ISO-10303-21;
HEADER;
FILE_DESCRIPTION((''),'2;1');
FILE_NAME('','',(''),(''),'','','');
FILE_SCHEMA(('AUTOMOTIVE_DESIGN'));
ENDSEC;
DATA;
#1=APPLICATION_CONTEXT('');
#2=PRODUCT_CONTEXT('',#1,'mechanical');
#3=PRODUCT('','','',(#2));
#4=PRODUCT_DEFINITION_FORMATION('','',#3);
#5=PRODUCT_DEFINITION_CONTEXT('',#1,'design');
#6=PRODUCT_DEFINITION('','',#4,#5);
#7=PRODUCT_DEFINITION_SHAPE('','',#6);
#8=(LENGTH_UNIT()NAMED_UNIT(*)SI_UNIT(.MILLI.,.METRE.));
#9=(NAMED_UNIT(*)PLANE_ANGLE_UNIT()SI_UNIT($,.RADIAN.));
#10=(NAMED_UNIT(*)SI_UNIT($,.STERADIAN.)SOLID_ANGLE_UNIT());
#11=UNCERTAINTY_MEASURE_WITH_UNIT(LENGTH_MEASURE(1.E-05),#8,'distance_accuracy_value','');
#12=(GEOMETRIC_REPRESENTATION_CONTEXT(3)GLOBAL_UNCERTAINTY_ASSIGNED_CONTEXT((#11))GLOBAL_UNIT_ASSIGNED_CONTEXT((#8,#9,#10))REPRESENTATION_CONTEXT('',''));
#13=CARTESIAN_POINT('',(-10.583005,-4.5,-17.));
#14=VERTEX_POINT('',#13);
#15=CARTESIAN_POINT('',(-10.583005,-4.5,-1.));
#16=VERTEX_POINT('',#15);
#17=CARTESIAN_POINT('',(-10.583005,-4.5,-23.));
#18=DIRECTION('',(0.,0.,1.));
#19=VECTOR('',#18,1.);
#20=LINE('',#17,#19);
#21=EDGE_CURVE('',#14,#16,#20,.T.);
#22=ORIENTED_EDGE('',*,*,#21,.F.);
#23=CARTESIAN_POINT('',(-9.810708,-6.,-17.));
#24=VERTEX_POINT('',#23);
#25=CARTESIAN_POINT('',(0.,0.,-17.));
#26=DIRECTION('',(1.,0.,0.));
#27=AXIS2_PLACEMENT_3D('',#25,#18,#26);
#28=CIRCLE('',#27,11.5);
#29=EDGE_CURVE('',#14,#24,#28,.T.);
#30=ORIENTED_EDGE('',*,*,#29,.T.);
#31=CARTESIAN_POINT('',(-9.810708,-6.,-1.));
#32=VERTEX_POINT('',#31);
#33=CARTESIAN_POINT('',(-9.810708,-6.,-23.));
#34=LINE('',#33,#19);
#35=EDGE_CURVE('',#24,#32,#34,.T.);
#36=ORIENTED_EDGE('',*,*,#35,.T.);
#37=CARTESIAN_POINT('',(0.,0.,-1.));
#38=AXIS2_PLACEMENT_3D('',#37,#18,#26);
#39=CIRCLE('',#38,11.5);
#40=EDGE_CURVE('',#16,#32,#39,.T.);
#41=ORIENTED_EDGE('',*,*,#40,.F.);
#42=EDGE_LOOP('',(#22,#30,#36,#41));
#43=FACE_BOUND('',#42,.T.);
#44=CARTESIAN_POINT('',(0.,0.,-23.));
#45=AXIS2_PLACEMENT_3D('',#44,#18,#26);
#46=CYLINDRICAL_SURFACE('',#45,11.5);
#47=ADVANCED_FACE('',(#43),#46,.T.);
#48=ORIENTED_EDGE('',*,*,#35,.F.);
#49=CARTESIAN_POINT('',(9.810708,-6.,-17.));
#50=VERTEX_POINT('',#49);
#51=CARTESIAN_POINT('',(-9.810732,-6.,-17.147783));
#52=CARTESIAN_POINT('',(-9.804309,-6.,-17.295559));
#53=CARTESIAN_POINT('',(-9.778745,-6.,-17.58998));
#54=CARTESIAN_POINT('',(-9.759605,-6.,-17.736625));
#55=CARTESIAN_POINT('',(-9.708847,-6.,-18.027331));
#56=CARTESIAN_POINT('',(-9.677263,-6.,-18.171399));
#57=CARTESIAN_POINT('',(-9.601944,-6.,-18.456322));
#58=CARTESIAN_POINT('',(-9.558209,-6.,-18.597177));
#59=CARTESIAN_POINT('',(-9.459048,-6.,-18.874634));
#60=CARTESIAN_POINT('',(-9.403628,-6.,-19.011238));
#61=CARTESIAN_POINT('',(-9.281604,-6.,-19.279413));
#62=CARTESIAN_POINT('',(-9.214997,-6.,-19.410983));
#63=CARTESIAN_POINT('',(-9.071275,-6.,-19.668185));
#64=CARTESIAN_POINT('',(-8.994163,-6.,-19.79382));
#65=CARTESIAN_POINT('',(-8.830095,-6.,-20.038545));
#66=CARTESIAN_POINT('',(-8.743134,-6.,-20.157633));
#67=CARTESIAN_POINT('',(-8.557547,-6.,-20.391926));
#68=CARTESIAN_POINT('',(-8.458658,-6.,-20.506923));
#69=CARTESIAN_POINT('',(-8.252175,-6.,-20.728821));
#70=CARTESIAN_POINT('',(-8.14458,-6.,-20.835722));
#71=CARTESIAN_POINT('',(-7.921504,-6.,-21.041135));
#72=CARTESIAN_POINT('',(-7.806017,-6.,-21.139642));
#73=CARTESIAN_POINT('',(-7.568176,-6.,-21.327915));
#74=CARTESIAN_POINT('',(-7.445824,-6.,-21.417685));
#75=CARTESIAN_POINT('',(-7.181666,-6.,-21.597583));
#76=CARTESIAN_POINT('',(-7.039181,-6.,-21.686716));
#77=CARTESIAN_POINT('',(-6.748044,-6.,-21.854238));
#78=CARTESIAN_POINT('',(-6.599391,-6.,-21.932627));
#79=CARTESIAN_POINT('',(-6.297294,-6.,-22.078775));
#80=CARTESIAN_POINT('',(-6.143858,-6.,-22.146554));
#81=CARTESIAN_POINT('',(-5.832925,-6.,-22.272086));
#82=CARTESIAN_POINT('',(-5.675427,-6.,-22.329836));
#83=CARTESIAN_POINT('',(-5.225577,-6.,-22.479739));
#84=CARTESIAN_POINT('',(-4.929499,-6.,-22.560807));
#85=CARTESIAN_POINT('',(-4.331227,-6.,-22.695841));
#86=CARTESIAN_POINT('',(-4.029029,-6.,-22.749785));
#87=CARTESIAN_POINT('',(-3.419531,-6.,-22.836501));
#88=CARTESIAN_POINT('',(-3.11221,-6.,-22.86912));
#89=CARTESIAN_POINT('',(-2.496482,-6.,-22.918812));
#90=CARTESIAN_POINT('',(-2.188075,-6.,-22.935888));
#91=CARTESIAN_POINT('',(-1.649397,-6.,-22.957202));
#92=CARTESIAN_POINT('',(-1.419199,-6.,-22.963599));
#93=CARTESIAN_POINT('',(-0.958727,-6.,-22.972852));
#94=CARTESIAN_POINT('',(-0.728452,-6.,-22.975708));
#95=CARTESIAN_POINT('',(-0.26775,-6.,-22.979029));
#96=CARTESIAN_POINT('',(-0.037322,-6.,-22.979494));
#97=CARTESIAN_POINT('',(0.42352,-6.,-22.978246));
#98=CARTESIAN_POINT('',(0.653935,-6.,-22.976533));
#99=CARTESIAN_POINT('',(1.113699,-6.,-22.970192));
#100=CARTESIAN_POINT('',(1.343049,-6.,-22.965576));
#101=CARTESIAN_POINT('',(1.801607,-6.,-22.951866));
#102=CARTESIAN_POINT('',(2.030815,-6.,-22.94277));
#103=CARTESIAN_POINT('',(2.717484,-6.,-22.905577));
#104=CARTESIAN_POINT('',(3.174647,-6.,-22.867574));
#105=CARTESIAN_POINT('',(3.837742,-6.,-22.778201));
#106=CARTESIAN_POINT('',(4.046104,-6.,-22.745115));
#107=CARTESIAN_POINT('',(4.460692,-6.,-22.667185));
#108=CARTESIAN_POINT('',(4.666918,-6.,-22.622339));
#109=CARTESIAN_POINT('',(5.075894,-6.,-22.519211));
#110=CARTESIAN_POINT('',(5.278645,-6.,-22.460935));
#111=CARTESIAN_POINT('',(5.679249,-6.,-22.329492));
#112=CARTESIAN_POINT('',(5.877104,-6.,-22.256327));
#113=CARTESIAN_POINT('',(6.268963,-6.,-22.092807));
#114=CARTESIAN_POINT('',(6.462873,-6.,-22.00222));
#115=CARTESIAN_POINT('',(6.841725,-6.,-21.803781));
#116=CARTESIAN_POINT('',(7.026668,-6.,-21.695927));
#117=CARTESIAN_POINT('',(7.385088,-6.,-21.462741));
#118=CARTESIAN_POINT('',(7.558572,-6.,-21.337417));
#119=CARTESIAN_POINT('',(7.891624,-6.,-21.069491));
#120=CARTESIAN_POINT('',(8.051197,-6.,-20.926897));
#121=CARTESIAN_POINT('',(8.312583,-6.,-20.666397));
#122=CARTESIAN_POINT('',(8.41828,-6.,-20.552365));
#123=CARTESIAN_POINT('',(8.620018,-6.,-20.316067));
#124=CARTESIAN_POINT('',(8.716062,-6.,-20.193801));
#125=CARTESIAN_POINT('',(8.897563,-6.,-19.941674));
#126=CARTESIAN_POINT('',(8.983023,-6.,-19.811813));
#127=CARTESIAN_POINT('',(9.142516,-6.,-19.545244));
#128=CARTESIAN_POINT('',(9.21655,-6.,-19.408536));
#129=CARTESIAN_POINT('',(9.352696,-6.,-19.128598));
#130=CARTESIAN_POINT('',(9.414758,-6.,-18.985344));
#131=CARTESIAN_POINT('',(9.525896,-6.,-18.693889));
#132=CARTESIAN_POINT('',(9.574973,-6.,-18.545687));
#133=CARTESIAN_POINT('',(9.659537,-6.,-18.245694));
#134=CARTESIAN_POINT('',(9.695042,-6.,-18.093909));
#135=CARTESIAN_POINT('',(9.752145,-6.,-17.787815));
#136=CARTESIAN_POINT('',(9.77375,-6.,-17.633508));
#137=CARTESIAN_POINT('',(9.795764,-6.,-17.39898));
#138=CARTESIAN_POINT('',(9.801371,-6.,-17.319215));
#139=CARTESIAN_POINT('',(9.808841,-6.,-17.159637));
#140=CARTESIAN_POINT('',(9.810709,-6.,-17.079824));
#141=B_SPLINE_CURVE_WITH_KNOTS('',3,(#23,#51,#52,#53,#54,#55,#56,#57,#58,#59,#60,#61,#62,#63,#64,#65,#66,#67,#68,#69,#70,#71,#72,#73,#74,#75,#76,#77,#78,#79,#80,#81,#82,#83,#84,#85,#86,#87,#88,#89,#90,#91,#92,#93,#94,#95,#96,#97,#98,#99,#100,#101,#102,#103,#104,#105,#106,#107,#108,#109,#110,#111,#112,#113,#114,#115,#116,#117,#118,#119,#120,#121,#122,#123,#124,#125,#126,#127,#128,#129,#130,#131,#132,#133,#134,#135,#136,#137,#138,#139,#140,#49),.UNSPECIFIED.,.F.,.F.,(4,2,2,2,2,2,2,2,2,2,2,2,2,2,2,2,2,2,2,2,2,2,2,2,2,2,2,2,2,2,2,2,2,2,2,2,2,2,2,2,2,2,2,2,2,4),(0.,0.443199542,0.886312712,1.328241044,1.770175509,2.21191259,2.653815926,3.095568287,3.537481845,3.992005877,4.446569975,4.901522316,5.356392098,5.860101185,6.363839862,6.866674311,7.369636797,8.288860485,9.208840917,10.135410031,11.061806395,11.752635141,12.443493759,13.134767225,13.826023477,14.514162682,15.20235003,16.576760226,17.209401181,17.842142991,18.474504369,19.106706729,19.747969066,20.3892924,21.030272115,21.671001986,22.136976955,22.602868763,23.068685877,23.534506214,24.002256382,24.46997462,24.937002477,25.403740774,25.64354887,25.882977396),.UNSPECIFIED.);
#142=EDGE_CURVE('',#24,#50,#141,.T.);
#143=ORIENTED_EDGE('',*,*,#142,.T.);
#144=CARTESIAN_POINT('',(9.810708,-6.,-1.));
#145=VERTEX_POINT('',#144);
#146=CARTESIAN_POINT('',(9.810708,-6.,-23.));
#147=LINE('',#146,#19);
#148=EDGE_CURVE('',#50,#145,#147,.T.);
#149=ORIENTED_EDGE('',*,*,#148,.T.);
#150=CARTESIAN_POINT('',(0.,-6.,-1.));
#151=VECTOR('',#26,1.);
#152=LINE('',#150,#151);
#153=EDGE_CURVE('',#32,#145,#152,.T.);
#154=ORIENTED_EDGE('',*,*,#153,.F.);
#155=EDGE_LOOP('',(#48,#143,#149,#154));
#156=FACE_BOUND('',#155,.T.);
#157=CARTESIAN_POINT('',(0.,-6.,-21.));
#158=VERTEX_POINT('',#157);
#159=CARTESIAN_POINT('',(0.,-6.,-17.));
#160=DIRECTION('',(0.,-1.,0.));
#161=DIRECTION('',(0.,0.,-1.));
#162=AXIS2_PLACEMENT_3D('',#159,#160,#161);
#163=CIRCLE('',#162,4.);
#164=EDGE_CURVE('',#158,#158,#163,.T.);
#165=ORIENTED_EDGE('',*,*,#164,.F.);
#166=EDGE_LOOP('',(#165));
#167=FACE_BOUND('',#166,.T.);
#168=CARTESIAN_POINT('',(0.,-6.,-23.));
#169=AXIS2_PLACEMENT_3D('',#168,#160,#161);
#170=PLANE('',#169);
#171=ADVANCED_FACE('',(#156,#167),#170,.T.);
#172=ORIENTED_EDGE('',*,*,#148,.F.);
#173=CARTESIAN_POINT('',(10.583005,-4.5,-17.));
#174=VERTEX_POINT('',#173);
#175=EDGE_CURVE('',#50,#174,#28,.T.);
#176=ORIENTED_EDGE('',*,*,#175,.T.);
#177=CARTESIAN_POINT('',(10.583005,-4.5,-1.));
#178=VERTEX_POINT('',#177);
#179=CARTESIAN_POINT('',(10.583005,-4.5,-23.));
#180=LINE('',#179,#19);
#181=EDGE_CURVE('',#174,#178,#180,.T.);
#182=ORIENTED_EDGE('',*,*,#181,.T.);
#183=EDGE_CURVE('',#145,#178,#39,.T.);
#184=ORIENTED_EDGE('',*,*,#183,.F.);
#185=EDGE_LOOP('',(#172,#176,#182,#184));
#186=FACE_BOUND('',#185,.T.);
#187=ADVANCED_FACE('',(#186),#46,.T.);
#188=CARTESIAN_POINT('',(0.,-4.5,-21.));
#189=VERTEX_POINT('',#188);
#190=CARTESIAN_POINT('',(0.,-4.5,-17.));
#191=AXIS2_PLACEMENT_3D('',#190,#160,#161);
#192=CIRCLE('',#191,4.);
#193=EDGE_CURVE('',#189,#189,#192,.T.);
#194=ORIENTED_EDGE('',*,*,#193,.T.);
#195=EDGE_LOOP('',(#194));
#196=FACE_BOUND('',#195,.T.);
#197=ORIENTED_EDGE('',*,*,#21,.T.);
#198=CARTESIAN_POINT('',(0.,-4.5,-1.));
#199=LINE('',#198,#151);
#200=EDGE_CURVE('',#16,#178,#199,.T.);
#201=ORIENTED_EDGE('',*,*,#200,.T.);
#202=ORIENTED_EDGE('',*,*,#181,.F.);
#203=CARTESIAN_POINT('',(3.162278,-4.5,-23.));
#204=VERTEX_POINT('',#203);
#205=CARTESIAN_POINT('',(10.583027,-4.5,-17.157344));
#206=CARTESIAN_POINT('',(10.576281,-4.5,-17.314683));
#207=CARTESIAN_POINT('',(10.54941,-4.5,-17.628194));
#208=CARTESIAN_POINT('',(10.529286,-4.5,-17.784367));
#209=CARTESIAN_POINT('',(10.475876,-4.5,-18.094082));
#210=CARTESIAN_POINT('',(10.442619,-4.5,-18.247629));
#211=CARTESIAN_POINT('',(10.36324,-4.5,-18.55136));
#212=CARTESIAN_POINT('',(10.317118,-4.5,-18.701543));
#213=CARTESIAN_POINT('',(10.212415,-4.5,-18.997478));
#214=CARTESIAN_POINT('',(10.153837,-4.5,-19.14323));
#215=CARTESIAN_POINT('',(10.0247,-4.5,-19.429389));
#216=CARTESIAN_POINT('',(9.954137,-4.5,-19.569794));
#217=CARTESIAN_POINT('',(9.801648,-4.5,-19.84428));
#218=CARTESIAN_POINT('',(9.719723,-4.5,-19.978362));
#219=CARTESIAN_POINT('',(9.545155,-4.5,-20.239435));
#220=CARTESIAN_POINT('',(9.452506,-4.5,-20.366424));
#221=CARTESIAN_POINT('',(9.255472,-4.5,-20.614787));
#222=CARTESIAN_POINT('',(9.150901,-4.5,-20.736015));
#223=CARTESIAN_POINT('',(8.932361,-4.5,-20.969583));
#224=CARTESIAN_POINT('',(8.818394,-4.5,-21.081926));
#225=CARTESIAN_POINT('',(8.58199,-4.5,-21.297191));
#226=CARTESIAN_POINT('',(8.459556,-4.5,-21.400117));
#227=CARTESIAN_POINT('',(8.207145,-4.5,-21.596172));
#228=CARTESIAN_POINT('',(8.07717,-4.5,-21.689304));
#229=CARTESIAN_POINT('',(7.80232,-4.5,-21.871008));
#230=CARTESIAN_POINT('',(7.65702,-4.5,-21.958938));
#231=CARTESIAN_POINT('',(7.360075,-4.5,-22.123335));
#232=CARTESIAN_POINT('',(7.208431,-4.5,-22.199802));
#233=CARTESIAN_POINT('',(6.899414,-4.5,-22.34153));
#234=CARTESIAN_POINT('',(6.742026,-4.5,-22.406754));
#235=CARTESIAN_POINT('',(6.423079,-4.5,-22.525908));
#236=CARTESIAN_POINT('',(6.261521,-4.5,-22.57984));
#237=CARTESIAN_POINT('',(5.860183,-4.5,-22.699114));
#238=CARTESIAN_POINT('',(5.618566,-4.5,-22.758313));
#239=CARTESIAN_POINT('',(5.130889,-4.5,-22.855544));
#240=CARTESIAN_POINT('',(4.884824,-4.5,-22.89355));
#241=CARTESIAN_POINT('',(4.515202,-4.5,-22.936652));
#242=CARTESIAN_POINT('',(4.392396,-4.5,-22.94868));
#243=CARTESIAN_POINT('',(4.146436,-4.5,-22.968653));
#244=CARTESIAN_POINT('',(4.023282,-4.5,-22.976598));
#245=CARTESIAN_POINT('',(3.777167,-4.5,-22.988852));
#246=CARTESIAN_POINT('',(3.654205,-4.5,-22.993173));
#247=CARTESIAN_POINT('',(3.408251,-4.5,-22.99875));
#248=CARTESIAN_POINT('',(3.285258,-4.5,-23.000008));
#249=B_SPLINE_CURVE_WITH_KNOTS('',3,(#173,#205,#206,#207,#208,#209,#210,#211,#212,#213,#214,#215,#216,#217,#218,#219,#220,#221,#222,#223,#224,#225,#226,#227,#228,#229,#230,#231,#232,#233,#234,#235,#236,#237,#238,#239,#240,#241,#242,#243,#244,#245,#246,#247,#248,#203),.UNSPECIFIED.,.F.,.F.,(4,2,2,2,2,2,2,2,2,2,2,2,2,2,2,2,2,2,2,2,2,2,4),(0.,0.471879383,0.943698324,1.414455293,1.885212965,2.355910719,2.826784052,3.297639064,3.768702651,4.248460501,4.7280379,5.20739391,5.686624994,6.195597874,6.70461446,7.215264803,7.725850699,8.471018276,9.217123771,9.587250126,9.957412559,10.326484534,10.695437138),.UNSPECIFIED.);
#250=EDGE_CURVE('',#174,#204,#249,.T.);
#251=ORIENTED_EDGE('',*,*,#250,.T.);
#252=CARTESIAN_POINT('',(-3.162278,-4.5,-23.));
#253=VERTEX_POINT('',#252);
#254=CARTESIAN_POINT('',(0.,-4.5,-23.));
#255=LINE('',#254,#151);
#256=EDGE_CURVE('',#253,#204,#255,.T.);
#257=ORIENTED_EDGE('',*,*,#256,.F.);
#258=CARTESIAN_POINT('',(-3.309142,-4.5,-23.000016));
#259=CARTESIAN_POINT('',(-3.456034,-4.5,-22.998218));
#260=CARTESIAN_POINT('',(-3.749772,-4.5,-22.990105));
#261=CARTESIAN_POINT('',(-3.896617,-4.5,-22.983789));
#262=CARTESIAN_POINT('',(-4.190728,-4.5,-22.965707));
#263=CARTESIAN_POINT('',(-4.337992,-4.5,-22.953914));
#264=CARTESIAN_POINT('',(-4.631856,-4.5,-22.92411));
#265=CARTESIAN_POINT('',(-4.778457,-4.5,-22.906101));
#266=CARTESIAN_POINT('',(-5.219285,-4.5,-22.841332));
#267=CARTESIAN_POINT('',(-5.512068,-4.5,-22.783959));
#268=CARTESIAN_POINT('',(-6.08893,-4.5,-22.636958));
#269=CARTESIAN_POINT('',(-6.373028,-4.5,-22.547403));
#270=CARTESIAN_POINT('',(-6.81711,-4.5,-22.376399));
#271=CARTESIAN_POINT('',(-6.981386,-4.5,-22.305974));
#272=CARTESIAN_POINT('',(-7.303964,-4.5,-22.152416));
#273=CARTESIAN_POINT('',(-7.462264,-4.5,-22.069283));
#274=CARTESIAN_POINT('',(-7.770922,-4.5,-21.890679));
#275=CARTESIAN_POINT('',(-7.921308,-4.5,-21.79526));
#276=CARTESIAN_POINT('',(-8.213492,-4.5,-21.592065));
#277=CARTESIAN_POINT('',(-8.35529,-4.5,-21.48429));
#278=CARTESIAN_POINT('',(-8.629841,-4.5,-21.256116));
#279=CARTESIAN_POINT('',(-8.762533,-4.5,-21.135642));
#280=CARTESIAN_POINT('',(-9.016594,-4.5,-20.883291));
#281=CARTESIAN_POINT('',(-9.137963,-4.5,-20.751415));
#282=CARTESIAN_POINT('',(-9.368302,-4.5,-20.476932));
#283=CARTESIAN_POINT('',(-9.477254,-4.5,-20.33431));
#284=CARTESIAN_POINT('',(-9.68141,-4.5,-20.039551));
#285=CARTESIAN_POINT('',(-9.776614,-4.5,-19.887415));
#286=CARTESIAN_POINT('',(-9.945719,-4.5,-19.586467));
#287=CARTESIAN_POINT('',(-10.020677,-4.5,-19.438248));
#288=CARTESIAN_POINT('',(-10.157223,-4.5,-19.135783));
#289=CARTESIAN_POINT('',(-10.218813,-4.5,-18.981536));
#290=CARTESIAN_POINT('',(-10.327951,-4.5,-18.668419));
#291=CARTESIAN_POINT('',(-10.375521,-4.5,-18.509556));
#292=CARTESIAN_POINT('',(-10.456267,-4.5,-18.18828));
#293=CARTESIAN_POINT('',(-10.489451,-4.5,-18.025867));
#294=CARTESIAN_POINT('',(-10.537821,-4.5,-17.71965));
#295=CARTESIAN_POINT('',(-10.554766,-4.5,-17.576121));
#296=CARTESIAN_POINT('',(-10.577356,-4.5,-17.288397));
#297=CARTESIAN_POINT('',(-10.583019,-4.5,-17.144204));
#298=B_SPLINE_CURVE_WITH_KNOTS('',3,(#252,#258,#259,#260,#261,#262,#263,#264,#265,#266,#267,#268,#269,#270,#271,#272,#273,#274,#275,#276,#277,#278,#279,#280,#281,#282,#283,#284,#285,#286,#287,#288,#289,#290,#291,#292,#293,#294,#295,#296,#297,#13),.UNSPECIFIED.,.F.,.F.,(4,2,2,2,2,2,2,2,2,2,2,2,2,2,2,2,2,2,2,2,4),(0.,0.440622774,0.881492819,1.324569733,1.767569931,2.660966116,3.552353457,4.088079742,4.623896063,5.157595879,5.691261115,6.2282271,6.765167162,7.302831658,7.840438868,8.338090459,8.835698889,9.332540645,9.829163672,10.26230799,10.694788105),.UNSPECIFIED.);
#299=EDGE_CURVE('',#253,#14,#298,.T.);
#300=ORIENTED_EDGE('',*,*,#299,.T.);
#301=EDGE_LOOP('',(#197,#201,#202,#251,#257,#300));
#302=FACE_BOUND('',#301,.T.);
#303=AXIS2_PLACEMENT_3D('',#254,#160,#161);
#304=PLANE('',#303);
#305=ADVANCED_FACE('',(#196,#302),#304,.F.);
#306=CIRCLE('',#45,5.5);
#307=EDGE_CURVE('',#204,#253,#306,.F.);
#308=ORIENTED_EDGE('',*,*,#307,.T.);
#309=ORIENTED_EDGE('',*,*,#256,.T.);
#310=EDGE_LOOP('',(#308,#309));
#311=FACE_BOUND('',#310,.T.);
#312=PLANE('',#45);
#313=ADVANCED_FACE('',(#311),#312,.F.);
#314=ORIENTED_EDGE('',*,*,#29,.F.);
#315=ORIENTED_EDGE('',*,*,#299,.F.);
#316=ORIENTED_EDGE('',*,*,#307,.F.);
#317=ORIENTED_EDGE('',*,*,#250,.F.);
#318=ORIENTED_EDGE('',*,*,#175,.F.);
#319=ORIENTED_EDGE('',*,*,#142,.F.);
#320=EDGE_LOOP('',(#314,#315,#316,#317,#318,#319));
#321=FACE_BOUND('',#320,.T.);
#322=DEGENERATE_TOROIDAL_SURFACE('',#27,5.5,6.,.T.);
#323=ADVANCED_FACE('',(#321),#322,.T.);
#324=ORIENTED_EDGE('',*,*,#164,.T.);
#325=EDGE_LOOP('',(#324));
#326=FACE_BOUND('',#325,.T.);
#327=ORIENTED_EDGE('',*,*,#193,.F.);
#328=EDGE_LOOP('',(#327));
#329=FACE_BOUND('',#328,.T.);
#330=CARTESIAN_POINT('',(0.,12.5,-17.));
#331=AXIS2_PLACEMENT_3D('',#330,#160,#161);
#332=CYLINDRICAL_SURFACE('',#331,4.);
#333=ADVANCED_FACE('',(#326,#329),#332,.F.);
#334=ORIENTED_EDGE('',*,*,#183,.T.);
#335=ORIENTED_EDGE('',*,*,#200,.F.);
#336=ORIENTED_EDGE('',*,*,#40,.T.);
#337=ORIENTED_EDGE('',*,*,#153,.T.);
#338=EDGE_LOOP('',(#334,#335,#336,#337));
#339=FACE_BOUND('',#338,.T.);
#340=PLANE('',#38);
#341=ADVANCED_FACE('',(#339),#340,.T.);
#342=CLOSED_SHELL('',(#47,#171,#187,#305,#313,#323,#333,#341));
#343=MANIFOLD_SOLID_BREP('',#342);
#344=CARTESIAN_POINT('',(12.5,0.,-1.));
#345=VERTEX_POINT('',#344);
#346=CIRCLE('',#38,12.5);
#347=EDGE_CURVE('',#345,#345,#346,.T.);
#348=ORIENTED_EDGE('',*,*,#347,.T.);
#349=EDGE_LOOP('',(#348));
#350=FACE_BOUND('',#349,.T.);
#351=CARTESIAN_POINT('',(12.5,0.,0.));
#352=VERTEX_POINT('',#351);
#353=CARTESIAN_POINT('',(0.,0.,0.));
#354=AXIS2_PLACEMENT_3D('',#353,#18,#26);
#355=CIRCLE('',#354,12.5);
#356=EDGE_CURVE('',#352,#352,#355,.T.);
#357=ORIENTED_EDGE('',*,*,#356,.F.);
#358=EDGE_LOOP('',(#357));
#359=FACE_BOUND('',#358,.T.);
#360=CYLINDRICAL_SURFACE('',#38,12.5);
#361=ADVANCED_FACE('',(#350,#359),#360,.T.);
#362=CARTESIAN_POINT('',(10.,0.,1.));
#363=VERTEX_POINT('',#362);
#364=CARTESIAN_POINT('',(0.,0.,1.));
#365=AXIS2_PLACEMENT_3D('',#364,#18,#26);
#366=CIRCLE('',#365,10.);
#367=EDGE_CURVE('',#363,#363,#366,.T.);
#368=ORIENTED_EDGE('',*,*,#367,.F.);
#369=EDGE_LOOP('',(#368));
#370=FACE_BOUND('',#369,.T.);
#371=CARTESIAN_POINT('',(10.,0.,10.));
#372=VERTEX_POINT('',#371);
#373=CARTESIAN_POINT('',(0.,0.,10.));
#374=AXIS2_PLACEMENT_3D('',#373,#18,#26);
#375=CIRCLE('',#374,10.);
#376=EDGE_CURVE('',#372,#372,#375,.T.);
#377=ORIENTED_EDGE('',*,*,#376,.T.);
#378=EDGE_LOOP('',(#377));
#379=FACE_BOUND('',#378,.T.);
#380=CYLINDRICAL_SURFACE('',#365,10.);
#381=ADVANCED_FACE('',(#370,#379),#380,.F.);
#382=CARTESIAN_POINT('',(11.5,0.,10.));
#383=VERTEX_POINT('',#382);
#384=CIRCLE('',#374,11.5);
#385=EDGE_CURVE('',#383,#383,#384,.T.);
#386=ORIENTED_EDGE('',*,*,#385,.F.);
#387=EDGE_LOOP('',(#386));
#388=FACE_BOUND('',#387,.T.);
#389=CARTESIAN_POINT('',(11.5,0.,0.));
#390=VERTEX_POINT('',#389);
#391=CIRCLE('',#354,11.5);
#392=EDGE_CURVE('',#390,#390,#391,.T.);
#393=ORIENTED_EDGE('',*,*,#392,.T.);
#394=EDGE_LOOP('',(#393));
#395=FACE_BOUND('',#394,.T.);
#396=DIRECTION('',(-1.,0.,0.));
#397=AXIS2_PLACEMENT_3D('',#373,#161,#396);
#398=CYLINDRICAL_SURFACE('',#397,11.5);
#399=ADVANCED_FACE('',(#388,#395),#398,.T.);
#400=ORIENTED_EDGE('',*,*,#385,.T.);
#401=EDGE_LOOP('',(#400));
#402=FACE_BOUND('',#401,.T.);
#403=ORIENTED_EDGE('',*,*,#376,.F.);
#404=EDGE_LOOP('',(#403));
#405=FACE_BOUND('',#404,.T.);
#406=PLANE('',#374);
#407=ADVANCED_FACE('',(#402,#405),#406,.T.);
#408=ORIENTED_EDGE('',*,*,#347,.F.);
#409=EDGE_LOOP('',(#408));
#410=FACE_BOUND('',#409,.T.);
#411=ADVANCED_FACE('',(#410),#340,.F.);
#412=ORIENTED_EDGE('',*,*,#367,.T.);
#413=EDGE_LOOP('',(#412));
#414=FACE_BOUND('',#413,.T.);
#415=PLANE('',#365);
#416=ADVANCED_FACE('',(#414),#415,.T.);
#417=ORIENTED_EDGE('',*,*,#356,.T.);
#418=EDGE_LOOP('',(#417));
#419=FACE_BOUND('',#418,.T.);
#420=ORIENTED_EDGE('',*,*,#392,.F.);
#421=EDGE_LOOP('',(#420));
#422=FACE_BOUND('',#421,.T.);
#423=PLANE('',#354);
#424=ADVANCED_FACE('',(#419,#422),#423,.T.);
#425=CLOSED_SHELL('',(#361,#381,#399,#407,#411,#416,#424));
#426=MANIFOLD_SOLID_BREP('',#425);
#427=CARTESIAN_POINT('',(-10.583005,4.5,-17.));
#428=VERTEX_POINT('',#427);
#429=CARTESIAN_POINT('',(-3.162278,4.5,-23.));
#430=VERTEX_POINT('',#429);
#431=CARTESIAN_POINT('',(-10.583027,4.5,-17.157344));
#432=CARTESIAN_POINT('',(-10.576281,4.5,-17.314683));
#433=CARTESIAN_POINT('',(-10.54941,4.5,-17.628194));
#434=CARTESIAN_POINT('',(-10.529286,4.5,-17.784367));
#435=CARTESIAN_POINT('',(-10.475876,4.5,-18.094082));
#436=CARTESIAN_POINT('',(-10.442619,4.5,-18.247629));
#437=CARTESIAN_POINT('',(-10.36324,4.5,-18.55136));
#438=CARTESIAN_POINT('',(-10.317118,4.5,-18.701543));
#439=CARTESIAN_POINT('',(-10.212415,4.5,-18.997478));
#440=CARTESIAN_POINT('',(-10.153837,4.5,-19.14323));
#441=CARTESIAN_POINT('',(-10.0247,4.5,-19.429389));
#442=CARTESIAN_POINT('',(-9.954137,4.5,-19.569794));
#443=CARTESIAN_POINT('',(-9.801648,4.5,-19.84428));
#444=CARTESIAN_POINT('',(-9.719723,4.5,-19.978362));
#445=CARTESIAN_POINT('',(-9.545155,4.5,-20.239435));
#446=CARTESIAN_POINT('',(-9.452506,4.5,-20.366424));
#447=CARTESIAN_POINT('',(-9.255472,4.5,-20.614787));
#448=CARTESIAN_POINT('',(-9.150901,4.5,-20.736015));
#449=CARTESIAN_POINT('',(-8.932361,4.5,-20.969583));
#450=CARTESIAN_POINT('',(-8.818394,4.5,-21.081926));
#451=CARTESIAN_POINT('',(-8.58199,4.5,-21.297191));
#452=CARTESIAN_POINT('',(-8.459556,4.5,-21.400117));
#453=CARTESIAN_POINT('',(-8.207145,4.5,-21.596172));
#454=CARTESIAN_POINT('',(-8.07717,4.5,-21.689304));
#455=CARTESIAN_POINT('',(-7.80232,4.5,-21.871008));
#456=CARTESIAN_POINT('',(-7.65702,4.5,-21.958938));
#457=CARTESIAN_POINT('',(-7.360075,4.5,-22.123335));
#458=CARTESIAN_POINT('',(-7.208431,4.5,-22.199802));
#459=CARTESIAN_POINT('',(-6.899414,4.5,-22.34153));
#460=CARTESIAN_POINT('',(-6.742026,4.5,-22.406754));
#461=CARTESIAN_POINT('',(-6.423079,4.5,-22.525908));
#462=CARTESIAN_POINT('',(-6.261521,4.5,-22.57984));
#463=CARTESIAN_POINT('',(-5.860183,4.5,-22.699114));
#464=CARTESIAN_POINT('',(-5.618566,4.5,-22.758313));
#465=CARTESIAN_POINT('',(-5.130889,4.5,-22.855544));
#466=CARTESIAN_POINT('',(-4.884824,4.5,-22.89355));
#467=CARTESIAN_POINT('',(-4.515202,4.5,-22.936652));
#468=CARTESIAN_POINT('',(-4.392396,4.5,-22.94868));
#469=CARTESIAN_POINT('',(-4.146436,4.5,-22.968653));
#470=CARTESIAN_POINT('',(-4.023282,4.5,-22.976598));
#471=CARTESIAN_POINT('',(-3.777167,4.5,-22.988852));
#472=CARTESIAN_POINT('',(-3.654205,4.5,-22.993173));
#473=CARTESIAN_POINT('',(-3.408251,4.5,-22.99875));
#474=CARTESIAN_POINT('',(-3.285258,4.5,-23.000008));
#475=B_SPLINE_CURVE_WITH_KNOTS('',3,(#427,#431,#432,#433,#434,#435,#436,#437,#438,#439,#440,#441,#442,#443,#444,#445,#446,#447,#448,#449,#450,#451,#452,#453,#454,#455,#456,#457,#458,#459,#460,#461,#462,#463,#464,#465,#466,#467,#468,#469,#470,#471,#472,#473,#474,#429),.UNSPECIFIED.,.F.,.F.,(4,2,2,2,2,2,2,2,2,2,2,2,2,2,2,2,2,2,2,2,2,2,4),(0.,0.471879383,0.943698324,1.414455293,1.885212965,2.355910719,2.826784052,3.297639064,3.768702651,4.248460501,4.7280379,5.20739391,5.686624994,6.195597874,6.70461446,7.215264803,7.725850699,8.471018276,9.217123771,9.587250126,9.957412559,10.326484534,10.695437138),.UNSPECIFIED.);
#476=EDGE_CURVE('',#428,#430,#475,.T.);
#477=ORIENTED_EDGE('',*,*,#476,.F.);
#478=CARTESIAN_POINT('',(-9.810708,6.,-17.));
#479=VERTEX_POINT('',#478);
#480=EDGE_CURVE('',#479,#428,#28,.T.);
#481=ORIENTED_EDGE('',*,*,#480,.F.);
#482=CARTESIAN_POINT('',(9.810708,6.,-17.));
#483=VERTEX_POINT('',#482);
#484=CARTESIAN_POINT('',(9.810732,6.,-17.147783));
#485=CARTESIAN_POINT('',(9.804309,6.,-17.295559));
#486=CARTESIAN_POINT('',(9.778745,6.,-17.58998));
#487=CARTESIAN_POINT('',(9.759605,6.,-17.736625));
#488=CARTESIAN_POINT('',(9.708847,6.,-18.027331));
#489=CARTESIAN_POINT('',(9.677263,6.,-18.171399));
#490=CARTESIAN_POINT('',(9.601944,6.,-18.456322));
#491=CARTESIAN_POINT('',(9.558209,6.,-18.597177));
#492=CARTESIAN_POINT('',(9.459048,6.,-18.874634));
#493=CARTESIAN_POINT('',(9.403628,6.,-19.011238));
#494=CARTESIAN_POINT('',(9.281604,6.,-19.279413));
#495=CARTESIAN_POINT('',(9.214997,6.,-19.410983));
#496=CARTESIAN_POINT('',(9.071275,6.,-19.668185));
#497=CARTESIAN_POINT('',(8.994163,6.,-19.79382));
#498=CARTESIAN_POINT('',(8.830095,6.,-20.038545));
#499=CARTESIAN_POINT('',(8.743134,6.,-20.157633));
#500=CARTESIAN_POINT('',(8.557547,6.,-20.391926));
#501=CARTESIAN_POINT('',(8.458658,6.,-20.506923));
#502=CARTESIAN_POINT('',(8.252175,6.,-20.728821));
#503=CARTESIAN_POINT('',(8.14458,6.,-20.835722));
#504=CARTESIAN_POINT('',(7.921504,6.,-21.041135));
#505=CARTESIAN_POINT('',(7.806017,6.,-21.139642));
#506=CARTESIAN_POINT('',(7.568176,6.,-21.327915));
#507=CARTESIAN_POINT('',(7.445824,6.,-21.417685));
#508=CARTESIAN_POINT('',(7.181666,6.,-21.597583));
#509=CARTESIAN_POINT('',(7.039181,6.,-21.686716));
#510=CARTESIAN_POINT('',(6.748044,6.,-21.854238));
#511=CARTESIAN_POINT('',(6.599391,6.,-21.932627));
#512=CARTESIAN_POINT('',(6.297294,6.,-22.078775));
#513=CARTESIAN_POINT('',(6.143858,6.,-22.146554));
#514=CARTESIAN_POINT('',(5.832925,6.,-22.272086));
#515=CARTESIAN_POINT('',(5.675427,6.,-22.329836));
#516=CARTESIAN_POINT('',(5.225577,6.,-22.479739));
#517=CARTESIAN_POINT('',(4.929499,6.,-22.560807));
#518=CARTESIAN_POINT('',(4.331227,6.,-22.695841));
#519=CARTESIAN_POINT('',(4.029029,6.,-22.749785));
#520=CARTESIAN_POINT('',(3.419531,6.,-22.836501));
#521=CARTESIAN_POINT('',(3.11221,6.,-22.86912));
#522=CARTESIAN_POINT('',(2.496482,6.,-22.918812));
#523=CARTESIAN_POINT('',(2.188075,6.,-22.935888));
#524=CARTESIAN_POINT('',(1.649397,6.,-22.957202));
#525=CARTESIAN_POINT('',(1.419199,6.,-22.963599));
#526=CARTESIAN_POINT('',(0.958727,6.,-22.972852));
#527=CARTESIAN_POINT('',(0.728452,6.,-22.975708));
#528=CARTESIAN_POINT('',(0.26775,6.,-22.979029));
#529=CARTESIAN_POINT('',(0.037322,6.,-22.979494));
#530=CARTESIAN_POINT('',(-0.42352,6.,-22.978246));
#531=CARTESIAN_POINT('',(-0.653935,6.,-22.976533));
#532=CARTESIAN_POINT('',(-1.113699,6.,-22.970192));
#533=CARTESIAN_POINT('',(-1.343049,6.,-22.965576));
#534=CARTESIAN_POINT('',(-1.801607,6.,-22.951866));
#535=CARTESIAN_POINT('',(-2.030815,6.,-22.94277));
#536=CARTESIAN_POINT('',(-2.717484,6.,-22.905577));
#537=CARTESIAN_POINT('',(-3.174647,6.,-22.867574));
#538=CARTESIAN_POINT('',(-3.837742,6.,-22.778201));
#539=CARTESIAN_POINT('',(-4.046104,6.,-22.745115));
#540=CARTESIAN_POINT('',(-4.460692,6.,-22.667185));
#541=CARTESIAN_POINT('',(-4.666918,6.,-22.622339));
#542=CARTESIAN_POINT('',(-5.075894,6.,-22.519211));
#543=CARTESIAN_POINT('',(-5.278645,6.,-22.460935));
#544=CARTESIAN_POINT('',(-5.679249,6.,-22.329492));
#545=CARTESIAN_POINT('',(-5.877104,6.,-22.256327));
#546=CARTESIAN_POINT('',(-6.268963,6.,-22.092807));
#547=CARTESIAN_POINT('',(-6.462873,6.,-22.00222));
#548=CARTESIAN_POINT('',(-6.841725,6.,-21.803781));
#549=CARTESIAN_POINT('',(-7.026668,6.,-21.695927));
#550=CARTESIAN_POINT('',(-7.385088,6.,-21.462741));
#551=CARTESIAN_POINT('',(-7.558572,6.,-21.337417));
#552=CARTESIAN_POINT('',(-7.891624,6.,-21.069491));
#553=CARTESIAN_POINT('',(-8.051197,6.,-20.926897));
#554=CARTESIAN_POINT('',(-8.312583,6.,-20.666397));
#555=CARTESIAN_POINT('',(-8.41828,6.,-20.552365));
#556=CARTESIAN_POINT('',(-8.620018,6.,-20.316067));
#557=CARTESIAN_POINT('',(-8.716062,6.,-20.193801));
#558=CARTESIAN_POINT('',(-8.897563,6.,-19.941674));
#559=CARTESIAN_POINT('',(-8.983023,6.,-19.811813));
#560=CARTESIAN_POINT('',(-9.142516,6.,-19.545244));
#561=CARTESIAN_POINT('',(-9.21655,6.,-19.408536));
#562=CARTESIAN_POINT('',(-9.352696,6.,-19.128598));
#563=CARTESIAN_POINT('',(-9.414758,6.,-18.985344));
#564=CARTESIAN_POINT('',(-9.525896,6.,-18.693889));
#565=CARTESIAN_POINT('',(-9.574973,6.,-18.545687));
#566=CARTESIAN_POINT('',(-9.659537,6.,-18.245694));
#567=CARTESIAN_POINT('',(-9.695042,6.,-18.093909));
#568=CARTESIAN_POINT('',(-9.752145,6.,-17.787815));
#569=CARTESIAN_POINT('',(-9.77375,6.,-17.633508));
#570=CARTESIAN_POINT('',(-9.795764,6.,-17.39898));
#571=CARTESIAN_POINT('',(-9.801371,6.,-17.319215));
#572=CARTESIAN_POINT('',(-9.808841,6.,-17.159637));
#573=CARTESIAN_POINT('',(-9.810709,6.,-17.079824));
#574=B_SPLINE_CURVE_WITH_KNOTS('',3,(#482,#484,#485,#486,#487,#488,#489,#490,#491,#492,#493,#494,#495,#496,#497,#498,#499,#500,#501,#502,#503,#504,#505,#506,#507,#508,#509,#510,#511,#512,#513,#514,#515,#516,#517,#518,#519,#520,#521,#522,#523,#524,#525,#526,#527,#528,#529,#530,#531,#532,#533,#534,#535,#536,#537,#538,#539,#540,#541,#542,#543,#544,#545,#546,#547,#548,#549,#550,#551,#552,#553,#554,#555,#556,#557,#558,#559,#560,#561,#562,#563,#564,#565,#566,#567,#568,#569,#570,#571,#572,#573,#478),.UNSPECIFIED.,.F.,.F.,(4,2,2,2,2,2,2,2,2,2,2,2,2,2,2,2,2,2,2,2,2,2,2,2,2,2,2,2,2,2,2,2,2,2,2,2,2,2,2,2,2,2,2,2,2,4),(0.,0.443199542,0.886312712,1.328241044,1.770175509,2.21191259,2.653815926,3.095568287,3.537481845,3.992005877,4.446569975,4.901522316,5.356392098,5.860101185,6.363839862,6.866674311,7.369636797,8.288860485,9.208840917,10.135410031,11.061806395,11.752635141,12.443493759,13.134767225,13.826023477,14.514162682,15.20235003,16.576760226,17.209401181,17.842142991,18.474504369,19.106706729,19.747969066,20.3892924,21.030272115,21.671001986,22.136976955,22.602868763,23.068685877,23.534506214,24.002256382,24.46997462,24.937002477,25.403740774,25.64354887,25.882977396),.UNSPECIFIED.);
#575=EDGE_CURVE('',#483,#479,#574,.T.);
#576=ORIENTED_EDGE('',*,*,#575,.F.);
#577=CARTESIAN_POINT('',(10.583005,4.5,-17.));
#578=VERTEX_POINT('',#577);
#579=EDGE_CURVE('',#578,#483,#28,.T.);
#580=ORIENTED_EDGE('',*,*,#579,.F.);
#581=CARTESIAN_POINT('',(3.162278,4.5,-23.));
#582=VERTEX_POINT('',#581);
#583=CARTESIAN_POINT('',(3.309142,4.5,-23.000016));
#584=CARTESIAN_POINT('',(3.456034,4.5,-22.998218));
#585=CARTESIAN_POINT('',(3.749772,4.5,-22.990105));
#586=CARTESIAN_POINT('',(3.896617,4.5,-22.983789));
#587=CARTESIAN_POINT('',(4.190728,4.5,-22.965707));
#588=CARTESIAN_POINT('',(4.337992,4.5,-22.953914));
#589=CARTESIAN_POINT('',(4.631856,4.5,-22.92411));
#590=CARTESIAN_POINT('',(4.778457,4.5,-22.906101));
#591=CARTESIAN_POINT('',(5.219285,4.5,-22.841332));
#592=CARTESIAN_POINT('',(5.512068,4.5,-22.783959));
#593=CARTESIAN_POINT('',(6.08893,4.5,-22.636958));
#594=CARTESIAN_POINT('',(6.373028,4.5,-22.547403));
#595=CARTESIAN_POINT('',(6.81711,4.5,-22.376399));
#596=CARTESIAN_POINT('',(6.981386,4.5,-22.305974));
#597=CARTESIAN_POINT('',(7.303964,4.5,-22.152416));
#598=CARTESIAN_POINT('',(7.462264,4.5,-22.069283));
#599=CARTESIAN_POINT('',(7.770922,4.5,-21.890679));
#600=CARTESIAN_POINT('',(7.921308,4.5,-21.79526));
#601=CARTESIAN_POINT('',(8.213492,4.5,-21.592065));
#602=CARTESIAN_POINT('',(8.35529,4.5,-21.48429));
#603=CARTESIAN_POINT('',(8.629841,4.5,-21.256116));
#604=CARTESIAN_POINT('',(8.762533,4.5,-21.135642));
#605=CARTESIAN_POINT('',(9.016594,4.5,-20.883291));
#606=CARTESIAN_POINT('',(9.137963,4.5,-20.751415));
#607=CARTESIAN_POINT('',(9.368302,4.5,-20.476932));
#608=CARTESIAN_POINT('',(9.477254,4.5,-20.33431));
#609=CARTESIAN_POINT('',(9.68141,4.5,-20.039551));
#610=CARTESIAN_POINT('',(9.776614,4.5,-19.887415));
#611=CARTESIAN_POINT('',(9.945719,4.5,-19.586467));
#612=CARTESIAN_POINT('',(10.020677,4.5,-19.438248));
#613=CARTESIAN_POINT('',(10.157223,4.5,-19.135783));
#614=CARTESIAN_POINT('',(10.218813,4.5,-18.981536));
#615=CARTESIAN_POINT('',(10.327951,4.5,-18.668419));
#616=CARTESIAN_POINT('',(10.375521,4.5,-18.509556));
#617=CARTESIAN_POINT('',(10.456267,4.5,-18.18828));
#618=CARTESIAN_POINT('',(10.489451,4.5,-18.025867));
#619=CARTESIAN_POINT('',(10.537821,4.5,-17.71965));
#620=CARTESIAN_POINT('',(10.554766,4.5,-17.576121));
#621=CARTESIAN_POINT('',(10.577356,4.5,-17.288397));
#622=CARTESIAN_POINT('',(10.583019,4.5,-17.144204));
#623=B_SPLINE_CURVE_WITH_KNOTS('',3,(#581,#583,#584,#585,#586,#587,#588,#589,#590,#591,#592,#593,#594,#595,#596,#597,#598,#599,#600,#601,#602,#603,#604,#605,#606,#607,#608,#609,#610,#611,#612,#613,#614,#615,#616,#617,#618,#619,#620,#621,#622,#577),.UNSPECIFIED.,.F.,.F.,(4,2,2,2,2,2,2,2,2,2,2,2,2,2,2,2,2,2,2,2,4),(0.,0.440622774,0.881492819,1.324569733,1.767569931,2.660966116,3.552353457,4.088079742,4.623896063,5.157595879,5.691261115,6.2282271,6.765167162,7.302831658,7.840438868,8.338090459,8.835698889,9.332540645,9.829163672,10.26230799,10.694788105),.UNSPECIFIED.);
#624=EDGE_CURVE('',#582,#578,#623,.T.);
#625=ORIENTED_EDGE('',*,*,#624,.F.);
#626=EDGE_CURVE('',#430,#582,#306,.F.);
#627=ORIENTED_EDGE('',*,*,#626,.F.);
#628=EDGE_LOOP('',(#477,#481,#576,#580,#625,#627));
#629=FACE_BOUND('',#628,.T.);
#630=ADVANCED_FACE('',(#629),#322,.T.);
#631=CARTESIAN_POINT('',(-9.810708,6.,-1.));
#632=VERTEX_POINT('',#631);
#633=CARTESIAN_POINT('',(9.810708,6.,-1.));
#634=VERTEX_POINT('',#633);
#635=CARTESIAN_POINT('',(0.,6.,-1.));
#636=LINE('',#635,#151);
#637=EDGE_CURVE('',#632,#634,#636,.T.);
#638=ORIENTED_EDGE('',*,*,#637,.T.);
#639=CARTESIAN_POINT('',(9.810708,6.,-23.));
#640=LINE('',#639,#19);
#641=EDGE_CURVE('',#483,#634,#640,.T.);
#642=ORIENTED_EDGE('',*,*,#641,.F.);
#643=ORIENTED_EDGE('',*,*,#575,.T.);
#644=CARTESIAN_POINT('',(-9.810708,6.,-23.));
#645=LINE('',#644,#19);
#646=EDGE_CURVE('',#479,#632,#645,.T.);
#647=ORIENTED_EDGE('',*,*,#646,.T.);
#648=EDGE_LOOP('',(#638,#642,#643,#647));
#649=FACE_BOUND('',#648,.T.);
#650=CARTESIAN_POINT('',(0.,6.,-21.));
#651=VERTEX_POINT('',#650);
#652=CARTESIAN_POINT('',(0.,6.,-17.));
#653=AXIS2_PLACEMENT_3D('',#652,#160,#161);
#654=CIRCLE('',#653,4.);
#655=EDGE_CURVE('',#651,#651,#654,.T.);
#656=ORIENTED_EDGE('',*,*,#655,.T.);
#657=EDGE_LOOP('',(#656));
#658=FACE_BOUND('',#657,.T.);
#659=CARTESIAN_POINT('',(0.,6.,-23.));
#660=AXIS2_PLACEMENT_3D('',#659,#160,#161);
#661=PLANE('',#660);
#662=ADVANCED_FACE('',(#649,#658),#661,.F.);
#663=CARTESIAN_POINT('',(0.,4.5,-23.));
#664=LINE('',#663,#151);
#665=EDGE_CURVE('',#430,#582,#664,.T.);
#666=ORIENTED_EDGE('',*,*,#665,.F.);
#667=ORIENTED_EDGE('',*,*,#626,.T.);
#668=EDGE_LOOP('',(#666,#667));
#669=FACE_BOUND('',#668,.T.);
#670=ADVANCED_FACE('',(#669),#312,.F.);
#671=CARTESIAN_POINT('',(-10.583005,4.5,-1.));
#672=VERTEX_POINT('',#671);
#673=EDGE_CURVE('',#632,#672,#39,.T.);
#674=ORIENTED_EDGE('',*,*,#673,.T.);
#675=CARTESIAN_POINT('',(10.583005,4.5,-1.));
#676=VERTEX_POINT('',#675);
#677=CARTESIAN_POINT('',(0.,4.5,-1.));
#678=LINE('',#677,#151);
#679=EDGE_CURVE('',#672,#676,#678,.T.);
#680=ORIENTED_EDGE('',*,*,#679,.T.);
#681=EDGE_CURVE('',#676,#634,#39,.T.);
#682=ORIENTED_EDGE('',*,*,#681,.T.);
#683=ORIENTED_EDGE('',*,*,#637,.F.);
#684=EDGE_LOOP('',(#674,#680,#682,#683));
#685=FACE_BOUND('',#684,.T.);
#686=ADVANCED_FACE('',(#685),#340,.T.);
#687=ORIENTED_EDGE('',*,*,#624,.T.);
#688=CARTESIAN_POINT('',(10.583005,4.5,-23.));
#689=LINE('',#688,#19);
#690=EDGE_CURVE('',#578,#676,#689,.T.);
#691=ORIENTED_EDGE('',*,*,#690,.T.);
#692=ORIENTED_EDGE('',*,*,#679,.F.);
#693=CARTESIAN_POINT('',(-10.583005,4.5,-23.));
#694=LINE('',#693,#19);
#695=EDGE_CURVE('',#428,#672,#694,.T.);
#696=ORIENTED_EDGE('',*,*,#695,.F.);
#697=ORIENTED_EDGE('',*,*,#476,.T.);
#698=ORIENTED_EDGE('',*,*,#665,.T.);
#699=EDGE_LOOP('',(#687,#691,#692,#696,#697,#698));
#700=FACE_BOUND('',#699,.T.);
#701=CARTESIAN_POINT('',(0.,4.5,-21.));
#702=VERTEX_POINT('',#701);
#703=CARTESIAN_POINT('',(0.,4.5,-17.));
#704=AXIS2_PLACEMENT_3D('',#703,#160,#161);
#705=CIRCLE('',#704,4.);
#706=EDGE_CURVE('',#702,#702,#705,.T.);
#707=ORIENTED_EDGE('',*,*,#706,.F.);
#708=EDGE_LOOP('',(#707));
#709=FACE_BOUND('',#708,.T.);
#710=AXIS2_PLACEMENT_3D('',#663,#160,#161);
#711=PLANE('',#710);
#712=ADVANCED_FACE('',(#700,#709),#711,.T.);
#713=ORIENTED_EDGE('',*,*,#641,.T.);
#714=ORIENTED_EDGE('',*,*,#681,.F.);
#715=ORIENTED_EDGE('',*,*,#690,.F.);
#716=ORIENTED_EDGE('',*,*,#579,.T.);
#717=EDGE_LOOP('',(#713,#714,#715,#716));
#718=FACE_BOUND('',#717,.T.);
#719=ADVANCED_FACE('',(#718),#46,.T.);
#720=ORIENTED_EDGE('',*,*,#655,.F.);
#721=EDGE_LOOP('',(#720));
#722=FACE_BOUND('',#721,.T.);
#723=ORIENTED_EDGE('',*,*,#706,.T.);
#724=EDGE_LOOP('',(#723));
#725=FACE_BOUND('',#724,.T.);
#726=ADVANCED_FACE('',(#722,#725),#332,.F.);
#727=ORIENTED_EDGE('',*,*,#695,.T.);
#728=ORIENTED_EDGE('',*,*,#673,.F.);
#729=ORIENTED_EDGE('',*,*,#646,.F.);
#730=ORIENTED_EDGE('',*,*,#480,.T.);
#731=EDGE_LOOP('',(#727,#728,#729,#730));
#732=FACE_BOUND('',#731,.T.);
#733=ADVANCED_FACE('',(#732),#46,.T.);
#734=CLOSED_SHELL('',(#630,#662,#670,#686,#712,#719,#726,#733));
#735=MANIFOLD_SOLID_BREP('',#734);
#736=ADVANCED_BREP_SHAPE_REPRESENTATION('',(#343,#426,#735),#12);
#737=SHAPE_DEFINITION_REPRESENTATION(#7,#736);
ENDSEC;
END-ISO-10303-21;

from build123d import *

# Parameters (mm, degrees)
BOSS_EXTRUDE1_DEPTH   = 10
BOSS_EXTRUDE2_START   = -1
SKETCH1_3_R           = 12.5
BOSS_EXTRUDE2_DEPTH   = 1
BOSS_EXTRUDE3_START   = -1
BOSS_EXTRUDE3_DEPTH   = 22
BOSS_EXTRUDE3_2_DEPTH = 22
SKETCH2_R             = 4
CUT_EXTRUDE1_DEPTH    = 33.05464085
FILLET1_R             = 6
FILLET4_R             = 6
SKETCH3_R             = 10
CUT_EXTRUDE2_DEPTH    = 9


with BuildPart() as part:
    # Sketch1 → Boss-Extrude1 (new body)
    with BuildSketch(Plane.XY):
        with BuildLine():
            ThreePointArc((9.810708435, 6), (0, 11.5), (-9.810708435, 6))
            Line((-9.810708435, 6), (9.810708435, 6))
        make_face()
        with BuildLine():
            Line((9.810708435, 6), (-9.810708435, 6))
            ThreePointArc((-9.810708435, 6), (-10.224401665, 5.264181854), (-10.583005244, 4.5))
            Line((-10.583005244, 4.5), (10.583005244, 4.5))
            ThreePointArc((10.583005244, 4.5), (10.224401665, 5.264181854), (9.810708435, 6))
        make_face()
        with BuildLine():
            Line((10.583005244, 4.5), (-10.583005244, 4.5))
            ThreePointArc((-10.583005244, 4.5), (-10.806701598, 3.932581923), (-11, 3.354101966))
            Line((-11, 3.354101966), (-11, -3.354101966))
            ThreePointArc((-11, -3.354101966), (-10.806701598, -3.932581923), (-10.583005244, -4.5))
            Line((-10.583005244, -4.5), (10.583005244, -4.5))
            ThreePointArc((10.583005244, -4.5), (10.806701598, -3.932581923), (11, -3.354101966))
            Line((11, -3.354101966), (11, 3.354101966))
            ThreePointArc((11, 3.354101966), (10.806701598, 3.932581923), (10.583005244, 4.5))
        make_face()
        with BuildLine():
            ThreePointArc((11.5, 0), (11.374313166, 1.695582496), (11, 3.354101966))
            Line((11, 3.354101966), (11, -3.354101966))
            ThreePointArc((11, -3.354101966), (11.374313166, -1.695582496), (11.5, 0))
        make_face()
        with BuildLine():
            Line((9.810708435, -6), (-9.810708435, -6))
            ThreePointArc((-9.810708435, -6), (0, -11.5), (9.810708435, -6))
        make_face()
        with BuildLine():
            Line((10.583005244, -4.5), (-10.583005244, -4.5))
            ThreePointArc((-10.583005244, -4.5), (-10.224401665, -5.264181854), (-9.810708435, -6))
            Line((-9.810708435, -6), (9.810708435, -6))
            ThreePointArc((9.810708435, -6), (10.224401665, -5.264181854), (10.583005244, -4.5))
        make_face()
        with BuildLine():
            Line((-11, -3.354101966), (-11, 3.354101966))
            ThreePointArc((-11, 3.354101966), (-11.5, 0), (-11, -3.354101966))
        make_face()
    extrude(amount=BOSS_EXTRUDE1_DEPTH)

    # Sketch1<3> → Boss-Extrude2 (add)
    # profile 1 of 8: a face of its own
    with BuildSketch(Plane.XY.offset(BOSS_EXTRUDE2_START)):
        Circle(SKETCH1_3_R)
        with BuildLine():
            ThreePointArc((-10.583005244, 4.5), (-10.224401665, 5.264181854), (-9.810708435, 6))
            ThreePointArc((-9.810708435, 6), (0, 11.5), (9.810708435, 6))
            ThreePointArc((9.810708435, 6), (10.224401665, 5.264181854), (10.583005244, 4.5))
            ThreePointArc((10.583005244, 4.5), (10.806701598, 3.932581923), (11, 3.354101966))
            ThreePointArc((11, 3.354101966), (11.374313166, 1.695582496), (11.5, 0))
            ThreePointArc((11.5, 0), (11.374313166, -1.695582496), (11, -3.354101966))
            ThreePointArc((11, -3.354101966), (10.806701598, -3.932581923), (10.583005244, -4.5))
            ThreePointArc((10.583005244, -4.5), (10.224401665, -5.264181854), (9.810708435, -6))
            ThreePointArc((9.810708435, -6), (0, -11.5), (-9.810708435, -6))
            ThreePointArc((-9.810708435, -6), (-10.224401665, -5.264181854), (-10.583005244, -4.5))
            ThreePointArc((-10.583005244, -4.5), (-10.806701598, -3.932581923), (-11, -3.354101966))
            ThreePointArc((-11, -3.354101966), (-11.5, 0), (-11, 3.354101966))
            ThreePointArc((-11, 3.354101966), (-10.806701598, 3.932581923), (-10.583005244, 4.5))
        make_face(mode=Mode.SUBTRACT)
    # profile 2 of 8: a face of its own
    with BuildSketch(Plane.XY.offset(BOSS_EXTRUDE2_START)):
        with BuildLine():
            Line((-11, -3.354101966), (-11, 3.354101966))
            ThreePointArc((-11, 3.354101966), (-11.5, 0), (-11, -3.354101966))
        make_face()
    # profile 3 of 8: a face of its own
    with BuildSketch(Plane.XY.offset(BOSS_EXTRUDE2_START)):
        with BuildLine():
            ThreePointArc((9.810708435, 6), (0, 11.5), (-9.810708435, 6))
            Line((-9.810708435, 6), (9.810708435, 6))
        make_face()
    # profile 4 of 8: a face of its own
    with BuildSketch(Plane.XY.offset(BOSS_EXTRUDE2_START)):
        with BuildLine():
            Line((9.810708435, 6), (-9.810708435, 6))
            ThreePointArc((-9.810708435, 6), (-10.224401665, 5.264181854), (-10.583005244, 4.5))
            Line((-10.583005244, 4.5), (10.583005244, 4.5))
            ThreePointArc((10.583005244, 4.5), (10.224401665, 5.264181854), (9.810708435, 6))
        make_face()
    # profile 5 of 8: a face of its own
    with BuildSketch(Plane.XY.offset(BOSS_EXTRUDE2_START)):
        with BuildLine():
            ThreePointArc((11.5, 0), (11.374313166, 1.695582496), (11, 3.354101966))
            Line((11, 3.354101966), (11, -3.354101966))
            ThreePointArc((11, -3.354101966), (11.374313166, -1.695582496), (11.5, 0))
        make_face()
    # profile 6 of 8: a face of its own
    with BuildSketch(Plane.XY.offset(BOSS_EXTRUDE2_START)):
        with BuildLine():
            Line((10.583005244, 4.5), (-10.583005244, 4.5))
            ThreePointArc((-10.583005244, 4.5), (-10.806701598, 3.932581923), (-11, 3.354101966))
            Line((-11, 3.354101966), (-11, -3.354101966))
            ThreePointArc((-11, -3.354101966), (-10.806701598, -3.932581923), (-10.583005244, -4.5))
            Line((-10.583005244, -4.5), (10.583005244, -4.5))
            ThreePointArc((10.583005244, -4.5), (10.806701598, -3.932581923), (11, -3.354101966))
            Line((11, -3.354101966), (11, 3.354101966))
            ThreePointArc((11, 3.354101966), (10.806701598, 3.932581923), (10.583005244, 4.5))
        make_face()
    # profile 7 of 8: a face of its own
    with BuildSketch(Plane.XY.offset(BOSS_EXTRUDE2_START)):
        with BuildLine():
            Line((10.583005244, -4.5), (-10.583005244, -4.5))
            ThreePointArc((-10.583005244, -4.5), (-10.224401665, -5.264181854), (-9.810708435, -6))
            Line((-9.810708435, -6), (9.810708435, -6))
            ThreePointArc((9.810708435, -6), (10.224401665, -5.264181854), (10.583005244, -4.5))
        make_face()
    # profile 8 of 8: a face of its own
    with BuildSketch(Plane.XY.offset(BOSS_EXTRUDE2_START)):
        with BuildLine():
            Line((9.810708435, -6), (-9.810708435, -6))
            ThreePointArc((-9.810708435, -6), (0, -11.5), (9.810708435, -6))
        make_face()
    extrude(amount=BOSS_EXTRUDE2_DEPTH)

    # Sketch3 → Cut-Extrude2 (cut)
    with BuildSketch(Plane.XY.offset(10)):
        Circle(SKETCH3_R)
    extrude(amount=-CUT_EXTRUDE2_DEPTH, mode=Mode.SUBTRACT)


with BuildPart() as body_2:
    # Sketch1<5> → Boss-Extrude3 (new body)
    with BuildSketch(Plane.XY.offset(BOSS_EXTRUDE3_START)):
        with BuildLine():
            Line((9.810708435, 6), (-9.810708435, 6))
            ThreePointArc((-9.810708435, 6), (-10.224401665, 5.264181854), (-10.583005244, 4.5))
            Line((-10.583005244, 4.5), (10.583005244, 4.5))
            ThreePointArc((10.583005244, 4.5), (10.224401665, 5.264181854), (9.810708435, 6))
        make_face()
    extrude(amount=-BOSS_EXTRUDE3_DEPTH)


with BuildPart() as body_3:
    # Sketch1<5> → Boss-Extrude3 2 (new body)
    with BuildSketch(Plane.XY.offset(BOSS_EXTRUDE3_START)):
        with BuildLine():
            Line((10.583005244, -4.5), (-10.583005244, -4.5))
            ThreePointArc((-10.583005244, -4.5), (-10.224401665, -5.264181854), (-9.810708435, -6))
            Line((-9.810708435, -6), (9.810708435, -6))
            ThreePointArc((9.810708435, -6), (10.224401665, -5.264181854), (10.583005244, -4.5))
        make_face()
    extrude(amount=-BOSS_EXTRUDE3_2_DEPTH)


with BuildPart() as cut_extrude1_tool:
    # Sketch2 → Cut-Extrude1 (new, through all)
    with BuildSketch(Plane.XZ.offset(6)):
        with Locations(Location((0, -17, 0), (0, 0, 270))):
            Circle(SKETCH2_R)
    extrude(amount=-CUT_EXTRUDE1_DEPTH)


with BuildPart() as body_2_1:
    add(body_2.part)

    # Cut-Extrude1: cut by cut_extrude1_tool
    add(cut_extrude1_tool.part, mode=Mode.SUBTRACT)

    # Fillet4
    # the kernel refuses this fillet: 6 mm, written as the material it takes off along each edge
    with BuildSketch(Plane(origin=(0, 0, -23), x_dir=(0.2787039750131438, 0.9603770584056415, 0), z_dir=(0.9603770584056415, -0.2787039750131438, 0))) as fillet4_piece_1:
        with BuildLine():
            CenterArc((11.5 - FILLET4_R, FILLET4_R), FILLET4_R, 270, 90)
            Line((11.5 - FILLET4_R, 0), (11.5, 0))
            Line((11.5, 0), (11.5, FILLET4_R))
        make_face()
    revolve(axis=Axis((0, 0, -23), (0, 0, 1)), revolution_arc=157.881072733, mode=Mode.SUBTRACT)
    with BuildSketch(Plane(origin=(0, 0, -23), x_dir=(0.6198036364033519, -0.7847569383581018, 0), z_dir=(-0.7847569383581018, -0.6198036364033519, 0))) as fillet4_piece_2:
        with BuildLine():
            CenterArc((11.5 - FILLET4_R, FILLET4_R), FILLET4_R, 270, 90)
            Line((11.5, FILLET4_R), (11.5, 0))
            Line((11.5, 0), (11.5 - FILLET4_R, 0))
        make_face()
    revolve(axis=Axis((0, 0, -23), (0, 0, 1)), revolution_arc=157.881072733, mode=Mode.SUBTRACT)


with BuildPart() as body_3_1:
    add(body_3.part)

    # Cut-Extrude1: cut by cut_extrude1_tool
    add(cut_extrude1_tool.part, mode=Mode.SUBTRACT)

    # Fillet1
    # the kernel refuses this fillet: 6 mm, written as the material it takes off along each edge
    with BuildSketch(Plane(origin=(0, 0, -23), x_dir=(-0.27870397501325017, -0.9603770584056106, 0), z_dir=(-0.9603770584056106, 0.27870397501325017, 0))) as fillet1_piece_1:
        with BuildLine():
            CenterArc((11.5 - FILLET1_R, FILLET1_R), FILLET1_R, 270, 90)
            Line((11.5 - FILLET1_R, 0), (11.5, 0))
            Line((11.5, 0), (11.5, FILLET1_R))
        make_face()
    revolve(axis=Axis((0, 0, -23), (0, 0, 1)), revolution_arc=157.881072733, mode=Mode.SUBTRACT)
    with BuildSketch(Plane(origin=(0, 0, -23), x_dir=(-0.6198036364032732, 0.784756938358164, 0), z_dir=(0.784756938358164, 0.6198036364032732, 0))) as fillet1_piece_2:
        with BuildLine():
            CenterArc((11.5 - FILLET1_R, FILLET1_R), FILLET1_R, 270, 90)
            Line((11.5, FILLET1_R), (11.5, 0))
            Line((11.5, 0), (11.5 - FILLET1_R, 0))
        make_face()
    revolve(axis=Axis((0, 0, -23), (0, 0, 1)), revolution_arc=157.881072733, mode=Mode.SUBTRACT)


solid = Compound([part.part, body_2_1.part, body_3_1.part])
